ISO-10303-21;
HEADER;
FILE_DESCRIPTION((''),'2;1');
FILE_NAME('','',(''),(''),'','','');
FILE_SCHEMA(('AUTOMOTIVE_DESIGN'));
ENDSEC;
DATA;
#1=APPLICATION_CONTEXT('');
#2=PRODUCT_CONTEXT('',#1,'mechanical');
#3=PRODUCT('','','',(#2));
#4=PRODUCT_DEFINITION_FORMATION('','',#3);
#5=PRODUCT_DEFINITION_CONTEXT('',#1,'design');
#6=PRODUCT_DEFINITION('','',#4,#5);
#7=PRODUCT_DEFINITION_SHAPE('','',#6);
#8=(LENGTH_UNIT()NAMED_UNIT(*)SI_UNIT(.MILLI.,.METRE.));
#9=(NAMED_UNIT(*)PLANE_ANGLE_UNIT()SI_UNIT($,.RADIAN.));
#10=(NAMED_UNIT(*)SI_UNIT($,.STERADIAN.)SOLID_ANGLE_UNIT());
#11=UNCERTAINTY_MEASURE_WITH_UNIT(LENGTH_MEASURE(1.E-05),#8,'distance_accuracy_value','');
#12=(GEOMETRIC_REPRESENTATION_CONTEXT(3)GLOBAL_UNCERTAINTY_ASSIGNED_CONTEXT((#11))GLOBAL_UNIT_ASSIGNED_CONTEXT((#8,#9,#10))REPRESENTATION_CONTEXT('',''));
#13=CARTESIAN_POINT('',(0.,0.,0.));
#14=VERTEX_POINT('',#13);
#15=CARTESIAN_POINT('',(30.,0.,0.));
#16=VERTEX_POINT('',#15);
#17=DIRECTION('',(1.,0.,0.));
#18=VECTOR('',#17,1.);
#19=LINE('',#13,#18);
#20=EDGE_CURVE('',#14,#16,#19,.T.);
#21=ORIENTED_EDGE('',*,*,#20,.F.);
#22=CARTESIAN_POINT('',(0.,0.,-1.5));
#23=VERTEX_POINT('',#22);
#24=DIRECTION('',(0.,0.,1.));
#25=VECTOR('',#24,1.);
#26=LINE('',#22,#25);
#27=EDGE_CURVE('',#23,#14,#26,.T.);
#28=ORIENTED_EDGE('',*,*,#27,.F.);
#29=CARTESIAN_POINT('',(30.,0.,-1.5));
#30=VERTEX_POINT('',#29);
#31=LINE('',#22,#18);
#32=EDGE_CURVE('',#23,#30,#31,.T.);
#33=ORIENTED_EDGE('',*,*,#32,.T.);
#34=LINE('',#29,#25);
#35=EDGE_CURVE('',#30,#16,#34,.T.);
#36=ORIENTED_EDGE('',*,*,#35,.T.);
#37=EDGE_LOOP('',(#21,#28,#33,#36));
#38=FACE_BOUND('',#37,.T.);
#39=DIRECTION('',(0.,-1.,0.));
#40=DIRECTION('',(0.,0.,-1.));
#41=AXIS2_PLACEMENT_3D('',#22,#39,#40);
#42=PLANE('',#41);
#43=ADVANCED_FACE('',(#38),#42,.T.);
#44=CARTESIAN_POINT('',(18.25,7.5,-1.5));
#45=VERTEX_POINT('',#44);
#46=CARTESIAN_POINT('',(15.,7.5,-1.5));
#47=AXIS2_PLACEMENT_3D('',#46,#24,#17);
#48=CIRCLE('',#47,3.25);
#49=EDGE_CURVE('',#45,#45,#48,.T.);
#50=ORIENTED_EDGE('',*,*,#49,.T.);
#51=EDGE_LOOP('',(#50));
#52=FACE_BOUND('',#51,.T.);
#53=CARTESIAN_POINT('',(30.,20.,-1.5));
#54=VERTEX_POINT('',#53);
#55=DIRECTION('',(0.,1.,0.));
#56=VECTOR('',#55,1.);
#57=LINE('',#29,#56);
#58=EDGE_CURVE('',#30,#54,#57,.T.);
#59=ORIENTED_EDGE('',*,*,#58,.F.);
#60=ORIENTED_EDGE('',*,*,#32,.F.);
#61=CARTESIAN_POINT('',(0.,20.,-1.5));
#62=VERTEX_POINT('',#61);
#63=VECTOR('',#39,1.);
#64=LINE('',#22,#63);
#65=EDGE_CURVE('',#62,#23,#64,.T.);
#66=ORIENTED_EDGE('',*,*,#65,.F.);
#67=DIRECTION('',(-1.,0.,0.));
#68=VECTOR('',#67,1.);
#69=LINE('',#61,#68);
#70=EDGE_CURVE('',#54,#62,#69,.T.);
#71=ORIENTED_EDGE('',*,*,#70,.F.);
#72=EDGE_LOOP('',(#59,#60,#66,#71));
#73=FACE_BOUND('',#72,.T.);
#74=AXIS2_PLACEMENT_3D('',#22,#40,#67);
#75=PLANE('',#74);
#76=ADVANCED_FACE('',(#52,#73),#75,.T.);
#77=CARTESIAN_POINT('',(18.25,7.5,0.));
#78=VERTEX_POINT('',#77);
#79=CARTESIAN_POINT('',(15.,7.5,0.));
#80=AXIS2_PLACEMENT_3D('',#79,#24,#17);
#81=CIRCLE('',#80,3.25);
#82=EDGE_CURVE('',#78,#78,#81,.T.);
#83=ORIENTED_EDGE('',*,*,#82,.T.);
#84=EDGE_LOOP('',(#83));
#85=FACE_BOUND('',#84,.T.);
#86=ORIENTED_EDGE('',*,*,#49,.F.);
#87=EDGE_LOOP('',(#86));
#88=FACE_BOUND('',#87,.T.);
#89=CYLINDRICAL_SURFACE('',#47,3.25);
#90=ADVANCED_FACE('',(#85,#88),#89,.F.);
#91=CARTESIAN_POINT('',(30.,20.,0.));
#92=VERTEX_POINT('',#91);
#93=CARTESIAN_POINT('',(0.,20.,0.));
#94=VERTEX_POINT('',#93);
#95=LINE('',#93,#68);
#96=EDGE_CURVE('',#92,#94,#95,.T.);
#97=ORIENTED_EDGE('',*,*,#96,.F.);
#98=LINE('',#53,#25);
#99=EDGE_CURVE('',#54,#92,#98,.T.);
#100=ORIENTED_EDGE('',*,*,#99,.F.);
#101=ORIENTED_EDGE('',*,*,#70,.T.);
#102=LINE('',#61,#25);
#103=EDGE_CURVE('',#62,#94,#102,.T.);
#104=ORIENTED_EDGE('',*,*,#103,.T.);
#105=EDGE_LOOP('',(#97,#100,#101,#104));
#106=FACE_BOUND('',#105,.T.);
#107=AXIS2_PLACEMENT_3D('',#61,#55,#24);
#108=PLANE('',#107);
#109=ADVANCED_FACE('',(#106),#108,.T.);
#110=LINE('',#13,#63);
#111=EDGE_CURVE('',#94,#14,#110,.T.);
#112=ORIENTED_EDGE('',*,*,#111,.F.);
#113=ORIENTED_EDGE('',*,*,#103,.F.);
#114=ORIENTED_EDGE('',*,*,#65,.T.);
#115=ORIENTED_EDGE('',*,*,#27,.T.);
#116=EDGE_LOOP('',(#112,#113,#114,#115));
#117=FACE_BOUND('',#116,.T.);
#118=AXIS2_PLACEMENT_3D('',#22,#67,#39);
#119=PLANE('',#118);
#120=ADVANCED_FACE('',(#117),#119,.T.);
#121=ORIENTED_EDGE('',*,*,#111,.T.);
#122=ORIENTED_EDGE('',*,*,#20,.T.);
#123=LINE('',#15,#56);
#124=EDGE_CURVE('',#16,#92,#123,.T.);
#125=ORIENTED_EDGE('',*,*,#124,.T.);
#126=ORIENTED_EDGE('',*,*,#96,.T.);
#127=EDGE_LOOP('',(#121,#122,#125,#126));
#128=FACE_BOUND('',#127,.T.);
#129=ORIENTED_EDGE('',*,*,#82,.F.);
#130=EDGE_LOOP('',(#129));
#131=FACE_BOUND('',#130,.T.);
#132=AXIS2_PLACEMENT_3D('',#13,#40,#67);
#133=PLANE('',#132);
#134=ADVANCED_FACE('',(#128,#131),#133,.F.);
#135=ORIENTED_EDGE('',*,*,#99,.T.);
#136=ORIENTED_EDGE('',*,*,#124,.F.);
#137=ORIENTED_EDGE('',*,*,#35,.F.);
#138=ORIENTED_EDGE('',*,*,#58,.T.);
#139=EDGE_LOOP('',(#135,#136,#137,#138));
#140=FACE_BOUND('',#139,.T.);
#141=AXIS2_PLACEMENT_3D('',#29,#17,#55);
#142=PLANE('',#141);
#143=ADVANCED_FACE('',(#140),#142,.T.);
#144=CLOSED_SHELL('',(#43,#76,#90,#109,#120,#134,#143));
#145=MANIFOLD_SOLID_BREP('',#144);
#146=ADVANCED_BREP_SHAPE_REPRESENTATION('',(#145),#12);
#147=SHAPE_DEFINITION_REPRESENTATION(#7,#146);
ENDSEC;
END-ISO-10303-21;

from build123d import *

# Parameters (mm, degrees)
SKETCH1_W          = 30
SKETCH1_H          = 20
SKETCH1_R          = 3.25
BASE_FLANGE1_DEPTH = 1.5


# Sheet-metal steps are written as plain solids
with BuildPart() as part:
    # Sketch1 → Base-Flange1 (new body)
    with BuildSketch(Plane.XY):
        with Locations((15, 10)):
            Rectangle(SKETCH1_W, SKETCH1_H)
        with Locations((15, 7.5)):
            Circle(SKETCH1_R, mode=Mode.SUBTRACT)
    extrude(amount=-BASE_FLANGE1_DEPTH)


solid = part.part
